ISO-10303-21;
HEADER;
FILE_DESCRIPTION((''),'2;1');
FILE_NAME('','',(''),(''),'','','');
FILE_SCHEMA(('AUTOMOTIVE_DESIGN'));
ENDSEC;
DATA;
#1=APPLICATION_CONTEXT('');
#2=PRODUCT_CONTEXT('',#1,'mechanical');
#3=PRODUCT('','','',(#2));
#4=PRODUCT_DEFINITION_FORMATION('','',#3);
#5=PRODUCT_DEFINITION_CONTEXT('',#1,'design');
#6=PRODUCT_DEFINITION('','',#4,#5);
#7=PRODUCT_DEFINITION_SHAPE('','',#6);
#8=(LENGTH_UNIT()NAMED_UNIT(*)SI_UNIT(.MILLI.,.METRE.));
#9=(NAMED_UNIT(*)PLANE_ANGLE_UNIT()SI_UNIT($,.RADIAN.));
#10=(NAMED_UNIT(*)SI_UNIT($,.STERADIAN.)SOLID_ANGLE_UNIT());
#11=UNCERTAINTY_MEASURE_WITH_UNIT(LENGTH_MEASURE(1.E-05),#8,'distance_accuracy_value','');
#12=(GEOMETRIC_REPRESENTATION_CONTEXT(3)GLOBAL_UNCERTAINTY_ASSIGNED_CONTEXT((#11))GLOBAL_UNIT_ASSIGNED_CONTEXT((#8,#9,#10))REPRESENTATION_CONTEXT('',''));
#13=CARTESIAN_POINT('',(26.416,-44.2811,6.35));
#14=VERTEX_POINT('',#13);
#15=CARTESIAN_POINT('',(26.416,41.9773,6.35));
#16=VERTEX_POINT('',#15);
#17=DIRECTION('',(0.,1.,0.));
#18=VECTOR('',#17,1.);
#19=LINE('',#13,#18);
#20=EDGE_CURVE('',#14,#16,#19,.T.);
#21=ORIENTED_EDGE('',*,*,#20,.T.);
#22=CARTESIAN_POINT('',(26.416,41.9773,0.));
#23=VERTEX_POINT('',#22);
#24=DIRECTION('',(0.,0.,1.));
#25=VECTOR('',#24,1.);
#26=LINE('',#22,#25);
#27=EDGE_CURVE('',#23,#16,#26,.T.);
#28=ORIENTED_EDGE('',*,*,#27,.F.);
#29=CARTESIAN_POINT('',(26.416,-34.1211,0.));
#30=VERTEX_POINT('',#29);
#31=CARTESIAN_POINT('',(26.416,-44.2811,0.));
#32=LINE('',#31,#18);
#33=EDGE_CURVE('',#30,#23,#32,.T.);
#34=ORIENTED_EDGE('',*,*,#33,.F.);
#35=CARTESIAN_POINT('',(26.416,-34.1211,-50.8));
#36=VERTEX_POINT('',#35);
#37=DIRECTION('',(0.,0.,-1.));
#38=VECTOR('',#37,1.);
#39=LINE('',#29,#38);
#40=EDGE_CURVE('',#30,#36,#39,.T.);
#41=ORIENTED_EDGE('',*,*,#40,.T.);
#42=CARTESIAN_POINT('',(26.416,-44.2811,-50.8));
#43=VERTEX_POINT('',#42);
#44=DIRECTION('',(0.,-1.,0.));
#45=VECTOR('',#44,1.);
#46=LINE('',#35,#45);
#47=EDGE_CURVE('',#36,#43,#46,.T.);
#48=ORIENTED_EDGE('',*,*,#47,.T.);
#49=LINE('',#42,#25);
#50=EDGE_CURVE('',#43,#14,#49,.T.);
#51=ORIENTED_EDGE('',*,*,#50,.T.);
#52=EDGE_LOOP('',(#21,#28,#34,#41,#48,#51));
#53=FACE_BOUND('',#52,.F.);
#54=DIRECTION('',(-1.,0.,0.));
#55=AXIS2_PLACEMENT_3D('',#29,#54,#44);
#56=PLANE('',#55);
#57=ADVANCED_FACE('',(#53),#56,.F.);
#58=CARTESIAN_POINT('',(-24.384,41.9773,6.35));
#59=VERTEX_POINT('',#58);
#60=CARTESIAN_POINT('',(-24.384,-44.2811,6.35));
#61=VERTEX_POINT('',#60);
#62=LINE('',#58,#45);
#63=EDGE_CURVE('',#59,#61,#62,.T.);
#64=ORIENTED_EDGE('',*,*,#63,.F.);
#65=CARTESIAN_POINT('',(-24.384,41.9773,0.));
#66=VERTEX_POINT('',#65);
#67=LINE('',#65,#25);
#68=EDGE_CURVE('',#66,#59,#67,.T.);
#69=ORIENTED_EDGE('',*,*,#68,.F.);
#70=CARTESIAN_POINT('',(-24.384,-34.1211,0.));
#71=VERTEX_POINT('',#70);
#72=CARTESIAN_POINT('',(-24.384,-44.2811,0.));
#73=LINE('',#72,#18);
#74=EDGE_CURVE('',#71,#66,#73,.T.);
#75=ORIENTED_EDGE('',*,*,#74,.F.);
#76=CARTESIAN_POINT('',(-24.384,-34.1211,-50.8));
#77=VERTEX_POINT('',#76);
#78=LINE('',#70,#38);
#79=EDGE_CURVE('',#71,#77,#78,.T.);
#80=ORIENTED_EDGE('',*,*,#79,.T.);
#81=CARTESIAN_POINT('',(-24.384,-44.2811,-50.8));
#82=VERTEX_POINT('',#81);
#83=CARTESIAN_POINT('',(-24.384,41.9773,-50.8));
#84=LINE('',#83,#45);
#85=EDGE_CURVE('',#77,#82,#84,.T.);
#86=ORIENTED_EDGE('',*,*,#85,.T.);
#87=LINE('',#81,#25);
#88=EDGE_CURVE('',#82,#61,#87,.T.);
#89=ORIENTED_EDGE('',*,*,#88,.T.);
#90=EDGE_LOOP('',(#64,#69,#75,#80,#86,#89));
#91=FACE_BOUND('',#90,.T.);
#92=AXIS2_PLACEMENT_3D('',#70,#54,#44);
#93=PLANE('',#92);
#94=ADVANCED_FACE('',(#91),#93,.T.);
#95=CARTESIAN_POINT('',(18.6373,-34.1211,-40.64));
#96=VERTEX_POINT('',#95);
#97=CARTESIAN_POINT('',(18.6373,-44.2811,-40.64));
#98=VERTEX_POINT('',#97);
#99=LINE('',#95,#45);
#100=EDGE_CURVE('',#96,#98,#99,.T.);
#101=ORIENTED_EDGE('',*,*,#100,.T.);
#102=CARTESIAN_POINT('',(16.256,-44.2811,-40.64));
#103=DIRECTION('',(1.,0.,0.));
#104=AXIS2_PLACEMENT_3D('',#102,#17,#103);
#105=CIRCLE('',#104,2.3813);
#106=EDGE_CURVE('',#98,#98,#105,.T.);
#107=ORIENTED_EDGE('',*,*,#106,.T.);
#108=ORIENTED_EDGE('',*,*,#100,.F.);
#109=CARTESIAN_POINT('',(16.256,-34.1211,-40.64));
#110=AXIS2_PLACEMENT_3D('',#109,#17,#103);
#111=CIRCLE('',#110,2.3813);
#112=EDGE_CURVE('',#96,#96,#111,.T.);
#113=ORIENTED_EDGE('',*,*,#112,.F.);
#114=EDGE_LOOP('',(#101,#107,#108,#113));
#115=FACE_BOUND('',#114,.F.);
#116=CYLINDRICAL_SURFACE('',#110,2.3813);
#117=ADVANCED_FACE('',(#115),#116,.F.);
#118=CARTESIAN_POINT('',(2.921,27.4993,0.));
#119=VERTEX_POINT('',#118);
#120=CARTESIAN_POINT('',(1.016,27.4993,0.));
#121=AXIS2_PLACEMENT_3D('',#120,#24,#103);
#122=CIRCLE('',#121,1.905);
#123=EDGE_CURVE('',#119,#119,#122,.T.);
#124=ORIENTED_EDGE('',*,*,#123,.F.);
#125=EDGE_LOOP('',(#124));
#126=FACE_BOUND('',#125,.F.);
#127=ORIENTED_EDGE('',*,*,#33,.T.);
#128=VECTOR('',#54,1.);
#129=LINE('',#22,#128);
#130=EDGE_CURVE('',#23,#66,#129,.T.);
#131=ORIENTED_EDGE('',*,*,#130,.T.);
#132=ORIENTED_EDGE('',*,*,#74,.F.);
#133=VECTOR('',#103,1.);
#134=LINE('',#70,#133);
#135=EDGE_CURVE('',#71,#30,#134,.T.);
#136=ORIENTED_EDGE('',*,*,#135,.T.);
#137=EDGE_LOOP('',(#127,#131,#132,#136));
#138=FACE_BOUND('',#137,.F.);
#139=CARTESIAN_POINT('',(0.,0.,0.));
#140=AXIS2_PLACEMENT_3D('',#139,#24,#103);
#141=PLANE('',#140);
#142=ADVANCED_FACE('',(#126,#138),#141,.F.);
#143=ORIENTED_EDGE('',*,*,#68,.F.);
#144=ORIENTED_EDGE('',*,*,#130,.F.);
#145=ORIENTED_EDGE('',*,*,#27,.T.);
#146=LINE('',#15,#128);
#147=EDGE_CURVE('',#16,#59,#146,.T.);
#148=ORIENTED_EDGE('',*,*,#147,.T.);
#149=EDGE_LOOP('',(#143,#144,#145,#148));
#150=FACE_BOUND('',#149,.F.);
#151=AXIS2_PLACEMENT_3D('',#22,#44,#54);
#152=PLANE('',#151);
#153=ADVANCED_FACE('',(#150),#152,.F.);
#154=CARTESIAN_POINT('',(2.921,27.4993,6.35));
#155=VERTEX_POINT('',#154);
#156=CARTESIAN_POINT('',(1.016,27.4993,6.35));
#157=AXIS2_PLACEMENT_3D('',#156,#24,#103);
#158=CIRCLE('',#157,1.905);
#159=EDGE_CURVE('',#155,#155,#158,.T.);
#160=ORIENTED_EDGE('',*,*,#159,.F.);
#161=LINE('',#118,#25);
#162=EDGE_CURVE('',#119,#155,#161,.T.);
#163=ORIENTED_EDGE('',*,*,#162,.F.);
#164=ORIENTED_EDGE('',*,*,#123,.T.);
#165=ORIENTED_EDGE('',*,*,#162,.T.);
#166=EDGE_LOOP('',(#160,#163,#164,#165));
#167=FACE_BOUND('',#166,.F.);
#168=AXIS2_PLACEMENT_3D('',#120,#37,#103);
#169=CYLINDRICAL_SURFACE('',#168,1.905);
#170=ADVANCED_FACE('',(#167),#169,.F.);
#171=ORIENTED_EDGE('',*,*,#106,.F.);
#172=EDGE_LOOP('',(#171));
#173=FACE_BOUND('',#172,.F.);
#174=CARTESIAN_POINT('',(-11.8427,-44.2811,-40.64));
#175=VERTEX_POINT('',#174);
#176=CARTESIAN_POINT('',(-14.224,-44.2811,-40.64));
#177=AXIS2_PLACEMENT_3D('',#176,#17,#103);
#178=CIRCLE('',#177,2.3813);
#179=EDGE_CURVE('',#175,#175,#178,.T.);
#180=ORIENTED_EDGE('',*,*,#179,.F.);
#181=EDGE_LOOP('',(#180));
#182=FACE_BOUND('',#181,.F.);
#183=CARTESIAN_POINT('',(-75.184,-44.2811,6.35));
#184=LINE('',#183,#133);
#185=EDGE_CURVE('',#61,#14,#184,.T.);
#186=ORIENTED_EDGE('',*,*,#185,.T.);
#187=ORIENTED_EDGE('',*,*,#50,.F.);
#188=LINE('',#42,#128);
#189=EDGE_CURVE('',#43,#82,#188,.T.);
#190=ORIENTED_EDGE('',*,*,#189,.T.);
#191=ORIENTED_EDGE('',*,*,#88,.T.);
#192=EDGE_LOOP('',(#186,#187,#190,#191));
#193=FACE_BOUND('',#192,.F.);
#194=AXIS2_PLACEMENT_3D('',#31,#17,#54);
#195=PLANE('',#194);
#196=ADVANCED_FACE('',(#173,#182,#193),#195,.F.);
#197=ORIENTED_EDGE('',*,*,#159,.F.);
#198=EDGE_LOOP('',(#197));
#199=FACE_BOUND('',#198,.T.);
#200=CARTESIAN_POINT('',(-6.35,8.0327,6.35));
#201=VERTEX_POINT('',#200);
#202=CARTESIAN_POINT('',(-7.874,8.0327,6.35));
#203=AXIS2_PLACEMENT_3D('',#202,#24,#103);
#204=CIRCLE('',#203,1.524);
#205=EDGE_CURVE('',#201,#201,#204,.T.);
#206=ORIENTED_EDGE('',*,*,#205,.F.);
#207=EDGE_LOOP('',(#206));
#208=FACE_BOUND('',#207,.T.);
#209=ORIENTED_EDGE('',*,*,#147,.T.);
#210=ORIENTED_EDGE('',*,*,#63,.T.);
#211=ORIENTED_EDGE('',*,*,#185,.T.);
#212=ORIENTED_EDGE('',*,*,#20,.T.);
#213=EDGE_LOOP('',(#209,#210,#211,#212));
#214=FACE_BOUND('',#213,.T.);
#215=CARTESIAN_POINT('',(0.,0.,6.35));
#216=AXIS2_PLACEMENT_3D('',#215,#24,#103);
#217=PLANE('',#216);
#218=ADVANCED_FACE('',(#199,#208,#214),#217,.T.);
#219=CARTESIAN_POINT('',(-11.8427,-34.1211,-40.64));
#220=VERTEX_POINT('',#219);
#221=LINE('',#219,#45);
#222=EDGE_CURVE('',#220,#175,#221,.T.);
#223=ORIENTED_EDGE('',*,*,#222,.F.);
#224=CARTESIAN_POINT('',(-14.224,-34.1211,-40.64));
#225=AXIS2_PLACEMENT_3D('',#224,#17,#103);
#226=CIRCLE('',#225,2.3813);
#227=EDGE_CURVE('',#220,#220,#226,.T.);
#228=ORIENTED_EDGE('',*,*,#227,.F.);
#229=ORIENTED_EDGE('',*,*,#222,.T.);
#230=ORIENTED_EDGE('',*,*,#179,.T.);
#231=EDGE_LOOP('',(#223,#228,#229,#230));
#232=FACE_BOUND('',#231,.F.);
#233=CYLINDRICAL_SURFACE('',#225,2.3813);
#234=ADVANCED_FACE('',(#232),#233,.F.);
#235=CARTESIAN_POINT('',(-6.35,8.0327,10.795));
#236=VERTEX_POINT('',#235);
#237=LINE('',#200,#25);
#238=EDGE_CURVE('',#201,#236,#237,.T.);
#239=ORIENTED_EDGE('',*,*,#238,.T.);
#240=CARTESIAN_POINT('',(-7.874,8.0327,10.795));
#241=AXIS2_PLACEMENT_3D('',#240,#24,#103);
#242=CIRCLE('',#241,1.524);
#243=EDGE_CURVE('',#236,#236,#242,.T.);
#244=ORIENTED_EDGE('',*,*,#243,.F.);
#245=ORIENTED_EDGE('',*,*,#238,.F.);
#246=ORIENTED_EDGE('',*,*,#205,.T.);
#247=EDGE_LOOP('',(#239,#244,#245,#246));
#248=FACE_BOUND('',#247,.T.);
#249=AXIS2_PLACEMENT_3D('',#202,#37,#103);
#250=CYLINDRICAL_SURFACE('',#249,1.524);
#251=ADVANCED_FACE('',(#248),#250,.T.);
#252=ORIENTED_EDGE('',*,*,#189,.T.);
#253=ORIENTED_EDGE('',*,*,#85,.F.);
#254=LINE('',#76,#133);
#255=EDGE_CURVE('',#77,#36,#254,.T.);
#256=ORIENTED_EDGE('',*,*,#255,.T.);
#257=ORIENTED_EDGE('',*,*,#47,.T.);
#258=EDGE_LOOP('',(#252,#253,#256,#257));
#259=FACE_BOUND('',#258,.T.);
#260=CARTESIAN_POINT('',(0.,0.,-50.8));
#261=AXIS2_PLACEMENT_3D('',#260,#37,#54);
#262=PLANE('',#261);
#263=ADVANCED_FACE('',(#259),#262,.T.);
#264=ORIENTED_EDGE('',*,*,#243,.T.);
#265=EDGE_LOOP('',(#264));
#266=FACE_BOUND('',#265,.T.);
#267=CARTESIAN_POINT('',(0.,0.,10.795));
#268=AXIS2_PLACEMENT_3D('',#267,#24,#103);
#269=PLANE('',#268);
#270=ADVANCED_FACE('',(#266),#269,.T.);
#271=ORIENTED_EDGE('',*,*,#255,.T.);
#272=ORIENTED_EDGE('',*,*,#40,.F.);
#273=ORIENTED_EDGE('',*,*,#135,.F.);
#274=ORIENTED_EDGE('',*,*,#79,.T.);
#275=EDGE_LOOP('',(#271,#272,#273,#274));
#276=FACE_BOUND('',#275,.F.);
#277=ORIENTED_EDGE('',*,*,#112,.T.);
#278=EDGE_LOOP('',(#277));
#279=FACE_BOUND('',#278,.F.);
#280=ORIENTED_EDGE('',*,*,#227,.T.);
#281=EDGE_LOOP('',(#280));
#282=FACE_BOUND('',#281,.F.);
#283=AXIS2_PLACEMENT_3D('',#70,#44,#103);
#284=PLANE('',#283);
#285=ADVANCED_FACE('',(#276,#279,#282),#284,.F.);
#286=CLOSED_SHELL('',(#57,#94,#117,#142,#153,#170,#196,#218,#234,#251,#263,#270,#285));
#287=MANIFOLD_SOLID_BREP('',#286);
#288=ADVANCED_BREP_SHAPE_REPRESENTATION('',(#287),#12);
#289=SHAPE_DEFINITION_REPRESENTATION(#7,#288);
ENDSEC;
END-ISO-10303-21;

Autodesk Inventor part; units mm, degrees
ref_plane "YZ Plane" through (0, 0, 0) normal (1, 0, 0) x (0, 1, 0)
ref_plane "XZ Plane" through (0, 0, 0) normal (0, 1, 0) x (-1, 0, 0)
ref_plane "XY Plane" through (0, 0, 0) normal (0, 0, 1) x (1, 0, 0)
sketch "Sketch1" plane through (0, 0, 0) normal (0, 0, 1) x (1, 0, 0)
  circle A0 centre (1.016, 27.4993) radius 1.905
  arc A1 (-3.2174, 19.2546) -> (-0.4706, 18.1168) centre (1.016, 25.5904) ccw
  circle A2 centre (1.016, 25.5904) radius 7.62
  arc A3 (-0.4706, -2.0514) -> (-3.2174, -3.1892) centre (1.016, -9.525) ccw
  arc A4 (2.5026, -16.9986) -> (5.2494, -15.8608) centre (1.016, -9.525) ccw
  circle A5 centre (1.016, -9.525) radius 7.62
  line L0 (1.016, -1.905) -> (1.016, 17.9704)
  circle A6 centre (1.016, 8.0327) radius 9.525
  line L1 (0, 16.0654) -> (2.032, 16.0654)
  line L2 (2.032, 0) -> (0, 0)
  circle A7 centre (-7.874, 8.0327) radius 9.525
  line L3 (26.416, 41.9773) -> (-24.384, 41.9773)
  line L4 (-24.384, -44.2811) -> (-24.384, 41.9773)
  line L5 (26.416, -44.2811) -> (26.416, 41.9773)
  line L6 (-75.184, -44.2811) -> (77.216, -44.2811)
  line L7 (1.016, 8.0327) -> (-47.2731, 8.0327)
  circle A8 centre (-24.384, 8.0327) radius 21.5247
  circle A9 centre (1.016, -9.525) radius 1.905
  circle A10 centre (-7.874, 8.0327) radius 1.905
  point P0 (0, 0)
  dimension "d0" = 19.05
  dimension "d1" = 19.05
  dimension "d2" = 8.89
  dimension "d3" = 3.81
  dimension "d4" = 3.81
  dimension "d5" = 3.81
  dimension "d32" = 71.7804
  dimension "d33" = 44.2811
  dimension "d34" = 25.4
  dimension "d35" = 0
  dimension "d36" = 0
  dimension "d37" = 86.2584
extrude "Extrusion1" add sketch "Sketch1" along normal blind 6.35 contours A2 A1 | A5 A4 A3 | A6 A7 A8 L4 L3 L5 L6 | A7 A8 A6 | A6 A8 L7 L0 A7 | L0 A7 | A8 A7 L7 A10 A6 | A6 A10 L7 A8 | A8 L4 L7 A7 | L7 A8 A6 A7 L0 | L7 A10 A6 A8 | L7 L4 A8 A7 | A7 A8 A6 A10 L7 | A6 A8 A7 | A9
sketch "Sketch2" plane through (0, 0, 6.35) normal (0, 0, 1) x (1, 0, 0)
  line L0 (-3.429, -3.0002) -> (13.2364, -3.0002)
  line L1 (13.2364, -3.0002) -> (13.2364, 18.7074)
  line L2 (13.2364, 18.7074) -> (-3.429, 18.7074)
  line L3 (-3.429, 18.7074) -> (-3.429, -3.0002)
  point P0 (0, 0)
extrude "Extrusion2" add sketch "Sketch2" against normal blind 6.35
sketch "Sketch3" plane through (0, 0, 0) normal (0, 0, -1) x (-1, 0, 0)
  line L0 (24.384, 41.9773) -> (24.384, -44.2811) projected
  line L1 (-26.416, -44.2811) -> (24.384, -44.2811)
  line L2 (24.384, -44.2811) -> (24.384, -34.1211)
  line L3 (24.384, -34.1211) -> (-26.416, -34.1211)
  line L4 (-26.416, -34.1211) -> (-26.416, -44.2811)
  point P0 (0, 0)
  dimension "d10" = 10.16
extrude "Extrusion3" add sketch "Sketch3" along normal blind 50.8
sketch "Sketch4" plane through (-24.384, -34.1211, 0) normal (0, 1, 0) x (1, 0, 0)
  circle A0 centre (40.64, 40.64) radius 2.3813
  circle A1 centre (10.16, 40.64) radius 2.3813
  line L0 (50.8, 0) -> (0, 0)
  line L1 (0, 50.8) -> (50.8, 50.8) projected
  line L2 (50.8, 0) -> (50.8, 50.8) projected
  line L3 (0, 0) -> (0, 50.8) projected
  point P0 (24.384, 0)
  dimension "d13" = 4.7625
  dimension "d14" = 4.7625
  dimension "d17" = 10.16
  dimension "d18" = 10.16
  dimension "d19" = 10.16
  dimension "d20" = 10.16
extrude "Extrusion4" cut sketch "Sketch4" against normal up to next contours A0 | A1
sketch "Sketch5" plane through (0, 0, 6.35) normal (0, 0, 1) x (1, 0, 0)
  circle A0 centre (-7.874, 8.0327) radius 1.905 projected
  point P0 (0, 0)
extrude "Extrusion5" add sketch "Sketch5" against normal blind 6.35
sketch "Sketch6" plane through (0, 0, 6.35) normal (0, 0, 1) x (1, 0, 0)
  circle A0 centre (-7.874, 8.0327) radius 1.524
  point P0 (0, 0)
  dimension "d27" = 3.048
  dimension "d28" = 8.0327
  dimension "d29" = 7.874
extrude "Extrusion6" add sketch "Sketch6" along normal blind 4.445
properties part number "Middle Gear Frame"
